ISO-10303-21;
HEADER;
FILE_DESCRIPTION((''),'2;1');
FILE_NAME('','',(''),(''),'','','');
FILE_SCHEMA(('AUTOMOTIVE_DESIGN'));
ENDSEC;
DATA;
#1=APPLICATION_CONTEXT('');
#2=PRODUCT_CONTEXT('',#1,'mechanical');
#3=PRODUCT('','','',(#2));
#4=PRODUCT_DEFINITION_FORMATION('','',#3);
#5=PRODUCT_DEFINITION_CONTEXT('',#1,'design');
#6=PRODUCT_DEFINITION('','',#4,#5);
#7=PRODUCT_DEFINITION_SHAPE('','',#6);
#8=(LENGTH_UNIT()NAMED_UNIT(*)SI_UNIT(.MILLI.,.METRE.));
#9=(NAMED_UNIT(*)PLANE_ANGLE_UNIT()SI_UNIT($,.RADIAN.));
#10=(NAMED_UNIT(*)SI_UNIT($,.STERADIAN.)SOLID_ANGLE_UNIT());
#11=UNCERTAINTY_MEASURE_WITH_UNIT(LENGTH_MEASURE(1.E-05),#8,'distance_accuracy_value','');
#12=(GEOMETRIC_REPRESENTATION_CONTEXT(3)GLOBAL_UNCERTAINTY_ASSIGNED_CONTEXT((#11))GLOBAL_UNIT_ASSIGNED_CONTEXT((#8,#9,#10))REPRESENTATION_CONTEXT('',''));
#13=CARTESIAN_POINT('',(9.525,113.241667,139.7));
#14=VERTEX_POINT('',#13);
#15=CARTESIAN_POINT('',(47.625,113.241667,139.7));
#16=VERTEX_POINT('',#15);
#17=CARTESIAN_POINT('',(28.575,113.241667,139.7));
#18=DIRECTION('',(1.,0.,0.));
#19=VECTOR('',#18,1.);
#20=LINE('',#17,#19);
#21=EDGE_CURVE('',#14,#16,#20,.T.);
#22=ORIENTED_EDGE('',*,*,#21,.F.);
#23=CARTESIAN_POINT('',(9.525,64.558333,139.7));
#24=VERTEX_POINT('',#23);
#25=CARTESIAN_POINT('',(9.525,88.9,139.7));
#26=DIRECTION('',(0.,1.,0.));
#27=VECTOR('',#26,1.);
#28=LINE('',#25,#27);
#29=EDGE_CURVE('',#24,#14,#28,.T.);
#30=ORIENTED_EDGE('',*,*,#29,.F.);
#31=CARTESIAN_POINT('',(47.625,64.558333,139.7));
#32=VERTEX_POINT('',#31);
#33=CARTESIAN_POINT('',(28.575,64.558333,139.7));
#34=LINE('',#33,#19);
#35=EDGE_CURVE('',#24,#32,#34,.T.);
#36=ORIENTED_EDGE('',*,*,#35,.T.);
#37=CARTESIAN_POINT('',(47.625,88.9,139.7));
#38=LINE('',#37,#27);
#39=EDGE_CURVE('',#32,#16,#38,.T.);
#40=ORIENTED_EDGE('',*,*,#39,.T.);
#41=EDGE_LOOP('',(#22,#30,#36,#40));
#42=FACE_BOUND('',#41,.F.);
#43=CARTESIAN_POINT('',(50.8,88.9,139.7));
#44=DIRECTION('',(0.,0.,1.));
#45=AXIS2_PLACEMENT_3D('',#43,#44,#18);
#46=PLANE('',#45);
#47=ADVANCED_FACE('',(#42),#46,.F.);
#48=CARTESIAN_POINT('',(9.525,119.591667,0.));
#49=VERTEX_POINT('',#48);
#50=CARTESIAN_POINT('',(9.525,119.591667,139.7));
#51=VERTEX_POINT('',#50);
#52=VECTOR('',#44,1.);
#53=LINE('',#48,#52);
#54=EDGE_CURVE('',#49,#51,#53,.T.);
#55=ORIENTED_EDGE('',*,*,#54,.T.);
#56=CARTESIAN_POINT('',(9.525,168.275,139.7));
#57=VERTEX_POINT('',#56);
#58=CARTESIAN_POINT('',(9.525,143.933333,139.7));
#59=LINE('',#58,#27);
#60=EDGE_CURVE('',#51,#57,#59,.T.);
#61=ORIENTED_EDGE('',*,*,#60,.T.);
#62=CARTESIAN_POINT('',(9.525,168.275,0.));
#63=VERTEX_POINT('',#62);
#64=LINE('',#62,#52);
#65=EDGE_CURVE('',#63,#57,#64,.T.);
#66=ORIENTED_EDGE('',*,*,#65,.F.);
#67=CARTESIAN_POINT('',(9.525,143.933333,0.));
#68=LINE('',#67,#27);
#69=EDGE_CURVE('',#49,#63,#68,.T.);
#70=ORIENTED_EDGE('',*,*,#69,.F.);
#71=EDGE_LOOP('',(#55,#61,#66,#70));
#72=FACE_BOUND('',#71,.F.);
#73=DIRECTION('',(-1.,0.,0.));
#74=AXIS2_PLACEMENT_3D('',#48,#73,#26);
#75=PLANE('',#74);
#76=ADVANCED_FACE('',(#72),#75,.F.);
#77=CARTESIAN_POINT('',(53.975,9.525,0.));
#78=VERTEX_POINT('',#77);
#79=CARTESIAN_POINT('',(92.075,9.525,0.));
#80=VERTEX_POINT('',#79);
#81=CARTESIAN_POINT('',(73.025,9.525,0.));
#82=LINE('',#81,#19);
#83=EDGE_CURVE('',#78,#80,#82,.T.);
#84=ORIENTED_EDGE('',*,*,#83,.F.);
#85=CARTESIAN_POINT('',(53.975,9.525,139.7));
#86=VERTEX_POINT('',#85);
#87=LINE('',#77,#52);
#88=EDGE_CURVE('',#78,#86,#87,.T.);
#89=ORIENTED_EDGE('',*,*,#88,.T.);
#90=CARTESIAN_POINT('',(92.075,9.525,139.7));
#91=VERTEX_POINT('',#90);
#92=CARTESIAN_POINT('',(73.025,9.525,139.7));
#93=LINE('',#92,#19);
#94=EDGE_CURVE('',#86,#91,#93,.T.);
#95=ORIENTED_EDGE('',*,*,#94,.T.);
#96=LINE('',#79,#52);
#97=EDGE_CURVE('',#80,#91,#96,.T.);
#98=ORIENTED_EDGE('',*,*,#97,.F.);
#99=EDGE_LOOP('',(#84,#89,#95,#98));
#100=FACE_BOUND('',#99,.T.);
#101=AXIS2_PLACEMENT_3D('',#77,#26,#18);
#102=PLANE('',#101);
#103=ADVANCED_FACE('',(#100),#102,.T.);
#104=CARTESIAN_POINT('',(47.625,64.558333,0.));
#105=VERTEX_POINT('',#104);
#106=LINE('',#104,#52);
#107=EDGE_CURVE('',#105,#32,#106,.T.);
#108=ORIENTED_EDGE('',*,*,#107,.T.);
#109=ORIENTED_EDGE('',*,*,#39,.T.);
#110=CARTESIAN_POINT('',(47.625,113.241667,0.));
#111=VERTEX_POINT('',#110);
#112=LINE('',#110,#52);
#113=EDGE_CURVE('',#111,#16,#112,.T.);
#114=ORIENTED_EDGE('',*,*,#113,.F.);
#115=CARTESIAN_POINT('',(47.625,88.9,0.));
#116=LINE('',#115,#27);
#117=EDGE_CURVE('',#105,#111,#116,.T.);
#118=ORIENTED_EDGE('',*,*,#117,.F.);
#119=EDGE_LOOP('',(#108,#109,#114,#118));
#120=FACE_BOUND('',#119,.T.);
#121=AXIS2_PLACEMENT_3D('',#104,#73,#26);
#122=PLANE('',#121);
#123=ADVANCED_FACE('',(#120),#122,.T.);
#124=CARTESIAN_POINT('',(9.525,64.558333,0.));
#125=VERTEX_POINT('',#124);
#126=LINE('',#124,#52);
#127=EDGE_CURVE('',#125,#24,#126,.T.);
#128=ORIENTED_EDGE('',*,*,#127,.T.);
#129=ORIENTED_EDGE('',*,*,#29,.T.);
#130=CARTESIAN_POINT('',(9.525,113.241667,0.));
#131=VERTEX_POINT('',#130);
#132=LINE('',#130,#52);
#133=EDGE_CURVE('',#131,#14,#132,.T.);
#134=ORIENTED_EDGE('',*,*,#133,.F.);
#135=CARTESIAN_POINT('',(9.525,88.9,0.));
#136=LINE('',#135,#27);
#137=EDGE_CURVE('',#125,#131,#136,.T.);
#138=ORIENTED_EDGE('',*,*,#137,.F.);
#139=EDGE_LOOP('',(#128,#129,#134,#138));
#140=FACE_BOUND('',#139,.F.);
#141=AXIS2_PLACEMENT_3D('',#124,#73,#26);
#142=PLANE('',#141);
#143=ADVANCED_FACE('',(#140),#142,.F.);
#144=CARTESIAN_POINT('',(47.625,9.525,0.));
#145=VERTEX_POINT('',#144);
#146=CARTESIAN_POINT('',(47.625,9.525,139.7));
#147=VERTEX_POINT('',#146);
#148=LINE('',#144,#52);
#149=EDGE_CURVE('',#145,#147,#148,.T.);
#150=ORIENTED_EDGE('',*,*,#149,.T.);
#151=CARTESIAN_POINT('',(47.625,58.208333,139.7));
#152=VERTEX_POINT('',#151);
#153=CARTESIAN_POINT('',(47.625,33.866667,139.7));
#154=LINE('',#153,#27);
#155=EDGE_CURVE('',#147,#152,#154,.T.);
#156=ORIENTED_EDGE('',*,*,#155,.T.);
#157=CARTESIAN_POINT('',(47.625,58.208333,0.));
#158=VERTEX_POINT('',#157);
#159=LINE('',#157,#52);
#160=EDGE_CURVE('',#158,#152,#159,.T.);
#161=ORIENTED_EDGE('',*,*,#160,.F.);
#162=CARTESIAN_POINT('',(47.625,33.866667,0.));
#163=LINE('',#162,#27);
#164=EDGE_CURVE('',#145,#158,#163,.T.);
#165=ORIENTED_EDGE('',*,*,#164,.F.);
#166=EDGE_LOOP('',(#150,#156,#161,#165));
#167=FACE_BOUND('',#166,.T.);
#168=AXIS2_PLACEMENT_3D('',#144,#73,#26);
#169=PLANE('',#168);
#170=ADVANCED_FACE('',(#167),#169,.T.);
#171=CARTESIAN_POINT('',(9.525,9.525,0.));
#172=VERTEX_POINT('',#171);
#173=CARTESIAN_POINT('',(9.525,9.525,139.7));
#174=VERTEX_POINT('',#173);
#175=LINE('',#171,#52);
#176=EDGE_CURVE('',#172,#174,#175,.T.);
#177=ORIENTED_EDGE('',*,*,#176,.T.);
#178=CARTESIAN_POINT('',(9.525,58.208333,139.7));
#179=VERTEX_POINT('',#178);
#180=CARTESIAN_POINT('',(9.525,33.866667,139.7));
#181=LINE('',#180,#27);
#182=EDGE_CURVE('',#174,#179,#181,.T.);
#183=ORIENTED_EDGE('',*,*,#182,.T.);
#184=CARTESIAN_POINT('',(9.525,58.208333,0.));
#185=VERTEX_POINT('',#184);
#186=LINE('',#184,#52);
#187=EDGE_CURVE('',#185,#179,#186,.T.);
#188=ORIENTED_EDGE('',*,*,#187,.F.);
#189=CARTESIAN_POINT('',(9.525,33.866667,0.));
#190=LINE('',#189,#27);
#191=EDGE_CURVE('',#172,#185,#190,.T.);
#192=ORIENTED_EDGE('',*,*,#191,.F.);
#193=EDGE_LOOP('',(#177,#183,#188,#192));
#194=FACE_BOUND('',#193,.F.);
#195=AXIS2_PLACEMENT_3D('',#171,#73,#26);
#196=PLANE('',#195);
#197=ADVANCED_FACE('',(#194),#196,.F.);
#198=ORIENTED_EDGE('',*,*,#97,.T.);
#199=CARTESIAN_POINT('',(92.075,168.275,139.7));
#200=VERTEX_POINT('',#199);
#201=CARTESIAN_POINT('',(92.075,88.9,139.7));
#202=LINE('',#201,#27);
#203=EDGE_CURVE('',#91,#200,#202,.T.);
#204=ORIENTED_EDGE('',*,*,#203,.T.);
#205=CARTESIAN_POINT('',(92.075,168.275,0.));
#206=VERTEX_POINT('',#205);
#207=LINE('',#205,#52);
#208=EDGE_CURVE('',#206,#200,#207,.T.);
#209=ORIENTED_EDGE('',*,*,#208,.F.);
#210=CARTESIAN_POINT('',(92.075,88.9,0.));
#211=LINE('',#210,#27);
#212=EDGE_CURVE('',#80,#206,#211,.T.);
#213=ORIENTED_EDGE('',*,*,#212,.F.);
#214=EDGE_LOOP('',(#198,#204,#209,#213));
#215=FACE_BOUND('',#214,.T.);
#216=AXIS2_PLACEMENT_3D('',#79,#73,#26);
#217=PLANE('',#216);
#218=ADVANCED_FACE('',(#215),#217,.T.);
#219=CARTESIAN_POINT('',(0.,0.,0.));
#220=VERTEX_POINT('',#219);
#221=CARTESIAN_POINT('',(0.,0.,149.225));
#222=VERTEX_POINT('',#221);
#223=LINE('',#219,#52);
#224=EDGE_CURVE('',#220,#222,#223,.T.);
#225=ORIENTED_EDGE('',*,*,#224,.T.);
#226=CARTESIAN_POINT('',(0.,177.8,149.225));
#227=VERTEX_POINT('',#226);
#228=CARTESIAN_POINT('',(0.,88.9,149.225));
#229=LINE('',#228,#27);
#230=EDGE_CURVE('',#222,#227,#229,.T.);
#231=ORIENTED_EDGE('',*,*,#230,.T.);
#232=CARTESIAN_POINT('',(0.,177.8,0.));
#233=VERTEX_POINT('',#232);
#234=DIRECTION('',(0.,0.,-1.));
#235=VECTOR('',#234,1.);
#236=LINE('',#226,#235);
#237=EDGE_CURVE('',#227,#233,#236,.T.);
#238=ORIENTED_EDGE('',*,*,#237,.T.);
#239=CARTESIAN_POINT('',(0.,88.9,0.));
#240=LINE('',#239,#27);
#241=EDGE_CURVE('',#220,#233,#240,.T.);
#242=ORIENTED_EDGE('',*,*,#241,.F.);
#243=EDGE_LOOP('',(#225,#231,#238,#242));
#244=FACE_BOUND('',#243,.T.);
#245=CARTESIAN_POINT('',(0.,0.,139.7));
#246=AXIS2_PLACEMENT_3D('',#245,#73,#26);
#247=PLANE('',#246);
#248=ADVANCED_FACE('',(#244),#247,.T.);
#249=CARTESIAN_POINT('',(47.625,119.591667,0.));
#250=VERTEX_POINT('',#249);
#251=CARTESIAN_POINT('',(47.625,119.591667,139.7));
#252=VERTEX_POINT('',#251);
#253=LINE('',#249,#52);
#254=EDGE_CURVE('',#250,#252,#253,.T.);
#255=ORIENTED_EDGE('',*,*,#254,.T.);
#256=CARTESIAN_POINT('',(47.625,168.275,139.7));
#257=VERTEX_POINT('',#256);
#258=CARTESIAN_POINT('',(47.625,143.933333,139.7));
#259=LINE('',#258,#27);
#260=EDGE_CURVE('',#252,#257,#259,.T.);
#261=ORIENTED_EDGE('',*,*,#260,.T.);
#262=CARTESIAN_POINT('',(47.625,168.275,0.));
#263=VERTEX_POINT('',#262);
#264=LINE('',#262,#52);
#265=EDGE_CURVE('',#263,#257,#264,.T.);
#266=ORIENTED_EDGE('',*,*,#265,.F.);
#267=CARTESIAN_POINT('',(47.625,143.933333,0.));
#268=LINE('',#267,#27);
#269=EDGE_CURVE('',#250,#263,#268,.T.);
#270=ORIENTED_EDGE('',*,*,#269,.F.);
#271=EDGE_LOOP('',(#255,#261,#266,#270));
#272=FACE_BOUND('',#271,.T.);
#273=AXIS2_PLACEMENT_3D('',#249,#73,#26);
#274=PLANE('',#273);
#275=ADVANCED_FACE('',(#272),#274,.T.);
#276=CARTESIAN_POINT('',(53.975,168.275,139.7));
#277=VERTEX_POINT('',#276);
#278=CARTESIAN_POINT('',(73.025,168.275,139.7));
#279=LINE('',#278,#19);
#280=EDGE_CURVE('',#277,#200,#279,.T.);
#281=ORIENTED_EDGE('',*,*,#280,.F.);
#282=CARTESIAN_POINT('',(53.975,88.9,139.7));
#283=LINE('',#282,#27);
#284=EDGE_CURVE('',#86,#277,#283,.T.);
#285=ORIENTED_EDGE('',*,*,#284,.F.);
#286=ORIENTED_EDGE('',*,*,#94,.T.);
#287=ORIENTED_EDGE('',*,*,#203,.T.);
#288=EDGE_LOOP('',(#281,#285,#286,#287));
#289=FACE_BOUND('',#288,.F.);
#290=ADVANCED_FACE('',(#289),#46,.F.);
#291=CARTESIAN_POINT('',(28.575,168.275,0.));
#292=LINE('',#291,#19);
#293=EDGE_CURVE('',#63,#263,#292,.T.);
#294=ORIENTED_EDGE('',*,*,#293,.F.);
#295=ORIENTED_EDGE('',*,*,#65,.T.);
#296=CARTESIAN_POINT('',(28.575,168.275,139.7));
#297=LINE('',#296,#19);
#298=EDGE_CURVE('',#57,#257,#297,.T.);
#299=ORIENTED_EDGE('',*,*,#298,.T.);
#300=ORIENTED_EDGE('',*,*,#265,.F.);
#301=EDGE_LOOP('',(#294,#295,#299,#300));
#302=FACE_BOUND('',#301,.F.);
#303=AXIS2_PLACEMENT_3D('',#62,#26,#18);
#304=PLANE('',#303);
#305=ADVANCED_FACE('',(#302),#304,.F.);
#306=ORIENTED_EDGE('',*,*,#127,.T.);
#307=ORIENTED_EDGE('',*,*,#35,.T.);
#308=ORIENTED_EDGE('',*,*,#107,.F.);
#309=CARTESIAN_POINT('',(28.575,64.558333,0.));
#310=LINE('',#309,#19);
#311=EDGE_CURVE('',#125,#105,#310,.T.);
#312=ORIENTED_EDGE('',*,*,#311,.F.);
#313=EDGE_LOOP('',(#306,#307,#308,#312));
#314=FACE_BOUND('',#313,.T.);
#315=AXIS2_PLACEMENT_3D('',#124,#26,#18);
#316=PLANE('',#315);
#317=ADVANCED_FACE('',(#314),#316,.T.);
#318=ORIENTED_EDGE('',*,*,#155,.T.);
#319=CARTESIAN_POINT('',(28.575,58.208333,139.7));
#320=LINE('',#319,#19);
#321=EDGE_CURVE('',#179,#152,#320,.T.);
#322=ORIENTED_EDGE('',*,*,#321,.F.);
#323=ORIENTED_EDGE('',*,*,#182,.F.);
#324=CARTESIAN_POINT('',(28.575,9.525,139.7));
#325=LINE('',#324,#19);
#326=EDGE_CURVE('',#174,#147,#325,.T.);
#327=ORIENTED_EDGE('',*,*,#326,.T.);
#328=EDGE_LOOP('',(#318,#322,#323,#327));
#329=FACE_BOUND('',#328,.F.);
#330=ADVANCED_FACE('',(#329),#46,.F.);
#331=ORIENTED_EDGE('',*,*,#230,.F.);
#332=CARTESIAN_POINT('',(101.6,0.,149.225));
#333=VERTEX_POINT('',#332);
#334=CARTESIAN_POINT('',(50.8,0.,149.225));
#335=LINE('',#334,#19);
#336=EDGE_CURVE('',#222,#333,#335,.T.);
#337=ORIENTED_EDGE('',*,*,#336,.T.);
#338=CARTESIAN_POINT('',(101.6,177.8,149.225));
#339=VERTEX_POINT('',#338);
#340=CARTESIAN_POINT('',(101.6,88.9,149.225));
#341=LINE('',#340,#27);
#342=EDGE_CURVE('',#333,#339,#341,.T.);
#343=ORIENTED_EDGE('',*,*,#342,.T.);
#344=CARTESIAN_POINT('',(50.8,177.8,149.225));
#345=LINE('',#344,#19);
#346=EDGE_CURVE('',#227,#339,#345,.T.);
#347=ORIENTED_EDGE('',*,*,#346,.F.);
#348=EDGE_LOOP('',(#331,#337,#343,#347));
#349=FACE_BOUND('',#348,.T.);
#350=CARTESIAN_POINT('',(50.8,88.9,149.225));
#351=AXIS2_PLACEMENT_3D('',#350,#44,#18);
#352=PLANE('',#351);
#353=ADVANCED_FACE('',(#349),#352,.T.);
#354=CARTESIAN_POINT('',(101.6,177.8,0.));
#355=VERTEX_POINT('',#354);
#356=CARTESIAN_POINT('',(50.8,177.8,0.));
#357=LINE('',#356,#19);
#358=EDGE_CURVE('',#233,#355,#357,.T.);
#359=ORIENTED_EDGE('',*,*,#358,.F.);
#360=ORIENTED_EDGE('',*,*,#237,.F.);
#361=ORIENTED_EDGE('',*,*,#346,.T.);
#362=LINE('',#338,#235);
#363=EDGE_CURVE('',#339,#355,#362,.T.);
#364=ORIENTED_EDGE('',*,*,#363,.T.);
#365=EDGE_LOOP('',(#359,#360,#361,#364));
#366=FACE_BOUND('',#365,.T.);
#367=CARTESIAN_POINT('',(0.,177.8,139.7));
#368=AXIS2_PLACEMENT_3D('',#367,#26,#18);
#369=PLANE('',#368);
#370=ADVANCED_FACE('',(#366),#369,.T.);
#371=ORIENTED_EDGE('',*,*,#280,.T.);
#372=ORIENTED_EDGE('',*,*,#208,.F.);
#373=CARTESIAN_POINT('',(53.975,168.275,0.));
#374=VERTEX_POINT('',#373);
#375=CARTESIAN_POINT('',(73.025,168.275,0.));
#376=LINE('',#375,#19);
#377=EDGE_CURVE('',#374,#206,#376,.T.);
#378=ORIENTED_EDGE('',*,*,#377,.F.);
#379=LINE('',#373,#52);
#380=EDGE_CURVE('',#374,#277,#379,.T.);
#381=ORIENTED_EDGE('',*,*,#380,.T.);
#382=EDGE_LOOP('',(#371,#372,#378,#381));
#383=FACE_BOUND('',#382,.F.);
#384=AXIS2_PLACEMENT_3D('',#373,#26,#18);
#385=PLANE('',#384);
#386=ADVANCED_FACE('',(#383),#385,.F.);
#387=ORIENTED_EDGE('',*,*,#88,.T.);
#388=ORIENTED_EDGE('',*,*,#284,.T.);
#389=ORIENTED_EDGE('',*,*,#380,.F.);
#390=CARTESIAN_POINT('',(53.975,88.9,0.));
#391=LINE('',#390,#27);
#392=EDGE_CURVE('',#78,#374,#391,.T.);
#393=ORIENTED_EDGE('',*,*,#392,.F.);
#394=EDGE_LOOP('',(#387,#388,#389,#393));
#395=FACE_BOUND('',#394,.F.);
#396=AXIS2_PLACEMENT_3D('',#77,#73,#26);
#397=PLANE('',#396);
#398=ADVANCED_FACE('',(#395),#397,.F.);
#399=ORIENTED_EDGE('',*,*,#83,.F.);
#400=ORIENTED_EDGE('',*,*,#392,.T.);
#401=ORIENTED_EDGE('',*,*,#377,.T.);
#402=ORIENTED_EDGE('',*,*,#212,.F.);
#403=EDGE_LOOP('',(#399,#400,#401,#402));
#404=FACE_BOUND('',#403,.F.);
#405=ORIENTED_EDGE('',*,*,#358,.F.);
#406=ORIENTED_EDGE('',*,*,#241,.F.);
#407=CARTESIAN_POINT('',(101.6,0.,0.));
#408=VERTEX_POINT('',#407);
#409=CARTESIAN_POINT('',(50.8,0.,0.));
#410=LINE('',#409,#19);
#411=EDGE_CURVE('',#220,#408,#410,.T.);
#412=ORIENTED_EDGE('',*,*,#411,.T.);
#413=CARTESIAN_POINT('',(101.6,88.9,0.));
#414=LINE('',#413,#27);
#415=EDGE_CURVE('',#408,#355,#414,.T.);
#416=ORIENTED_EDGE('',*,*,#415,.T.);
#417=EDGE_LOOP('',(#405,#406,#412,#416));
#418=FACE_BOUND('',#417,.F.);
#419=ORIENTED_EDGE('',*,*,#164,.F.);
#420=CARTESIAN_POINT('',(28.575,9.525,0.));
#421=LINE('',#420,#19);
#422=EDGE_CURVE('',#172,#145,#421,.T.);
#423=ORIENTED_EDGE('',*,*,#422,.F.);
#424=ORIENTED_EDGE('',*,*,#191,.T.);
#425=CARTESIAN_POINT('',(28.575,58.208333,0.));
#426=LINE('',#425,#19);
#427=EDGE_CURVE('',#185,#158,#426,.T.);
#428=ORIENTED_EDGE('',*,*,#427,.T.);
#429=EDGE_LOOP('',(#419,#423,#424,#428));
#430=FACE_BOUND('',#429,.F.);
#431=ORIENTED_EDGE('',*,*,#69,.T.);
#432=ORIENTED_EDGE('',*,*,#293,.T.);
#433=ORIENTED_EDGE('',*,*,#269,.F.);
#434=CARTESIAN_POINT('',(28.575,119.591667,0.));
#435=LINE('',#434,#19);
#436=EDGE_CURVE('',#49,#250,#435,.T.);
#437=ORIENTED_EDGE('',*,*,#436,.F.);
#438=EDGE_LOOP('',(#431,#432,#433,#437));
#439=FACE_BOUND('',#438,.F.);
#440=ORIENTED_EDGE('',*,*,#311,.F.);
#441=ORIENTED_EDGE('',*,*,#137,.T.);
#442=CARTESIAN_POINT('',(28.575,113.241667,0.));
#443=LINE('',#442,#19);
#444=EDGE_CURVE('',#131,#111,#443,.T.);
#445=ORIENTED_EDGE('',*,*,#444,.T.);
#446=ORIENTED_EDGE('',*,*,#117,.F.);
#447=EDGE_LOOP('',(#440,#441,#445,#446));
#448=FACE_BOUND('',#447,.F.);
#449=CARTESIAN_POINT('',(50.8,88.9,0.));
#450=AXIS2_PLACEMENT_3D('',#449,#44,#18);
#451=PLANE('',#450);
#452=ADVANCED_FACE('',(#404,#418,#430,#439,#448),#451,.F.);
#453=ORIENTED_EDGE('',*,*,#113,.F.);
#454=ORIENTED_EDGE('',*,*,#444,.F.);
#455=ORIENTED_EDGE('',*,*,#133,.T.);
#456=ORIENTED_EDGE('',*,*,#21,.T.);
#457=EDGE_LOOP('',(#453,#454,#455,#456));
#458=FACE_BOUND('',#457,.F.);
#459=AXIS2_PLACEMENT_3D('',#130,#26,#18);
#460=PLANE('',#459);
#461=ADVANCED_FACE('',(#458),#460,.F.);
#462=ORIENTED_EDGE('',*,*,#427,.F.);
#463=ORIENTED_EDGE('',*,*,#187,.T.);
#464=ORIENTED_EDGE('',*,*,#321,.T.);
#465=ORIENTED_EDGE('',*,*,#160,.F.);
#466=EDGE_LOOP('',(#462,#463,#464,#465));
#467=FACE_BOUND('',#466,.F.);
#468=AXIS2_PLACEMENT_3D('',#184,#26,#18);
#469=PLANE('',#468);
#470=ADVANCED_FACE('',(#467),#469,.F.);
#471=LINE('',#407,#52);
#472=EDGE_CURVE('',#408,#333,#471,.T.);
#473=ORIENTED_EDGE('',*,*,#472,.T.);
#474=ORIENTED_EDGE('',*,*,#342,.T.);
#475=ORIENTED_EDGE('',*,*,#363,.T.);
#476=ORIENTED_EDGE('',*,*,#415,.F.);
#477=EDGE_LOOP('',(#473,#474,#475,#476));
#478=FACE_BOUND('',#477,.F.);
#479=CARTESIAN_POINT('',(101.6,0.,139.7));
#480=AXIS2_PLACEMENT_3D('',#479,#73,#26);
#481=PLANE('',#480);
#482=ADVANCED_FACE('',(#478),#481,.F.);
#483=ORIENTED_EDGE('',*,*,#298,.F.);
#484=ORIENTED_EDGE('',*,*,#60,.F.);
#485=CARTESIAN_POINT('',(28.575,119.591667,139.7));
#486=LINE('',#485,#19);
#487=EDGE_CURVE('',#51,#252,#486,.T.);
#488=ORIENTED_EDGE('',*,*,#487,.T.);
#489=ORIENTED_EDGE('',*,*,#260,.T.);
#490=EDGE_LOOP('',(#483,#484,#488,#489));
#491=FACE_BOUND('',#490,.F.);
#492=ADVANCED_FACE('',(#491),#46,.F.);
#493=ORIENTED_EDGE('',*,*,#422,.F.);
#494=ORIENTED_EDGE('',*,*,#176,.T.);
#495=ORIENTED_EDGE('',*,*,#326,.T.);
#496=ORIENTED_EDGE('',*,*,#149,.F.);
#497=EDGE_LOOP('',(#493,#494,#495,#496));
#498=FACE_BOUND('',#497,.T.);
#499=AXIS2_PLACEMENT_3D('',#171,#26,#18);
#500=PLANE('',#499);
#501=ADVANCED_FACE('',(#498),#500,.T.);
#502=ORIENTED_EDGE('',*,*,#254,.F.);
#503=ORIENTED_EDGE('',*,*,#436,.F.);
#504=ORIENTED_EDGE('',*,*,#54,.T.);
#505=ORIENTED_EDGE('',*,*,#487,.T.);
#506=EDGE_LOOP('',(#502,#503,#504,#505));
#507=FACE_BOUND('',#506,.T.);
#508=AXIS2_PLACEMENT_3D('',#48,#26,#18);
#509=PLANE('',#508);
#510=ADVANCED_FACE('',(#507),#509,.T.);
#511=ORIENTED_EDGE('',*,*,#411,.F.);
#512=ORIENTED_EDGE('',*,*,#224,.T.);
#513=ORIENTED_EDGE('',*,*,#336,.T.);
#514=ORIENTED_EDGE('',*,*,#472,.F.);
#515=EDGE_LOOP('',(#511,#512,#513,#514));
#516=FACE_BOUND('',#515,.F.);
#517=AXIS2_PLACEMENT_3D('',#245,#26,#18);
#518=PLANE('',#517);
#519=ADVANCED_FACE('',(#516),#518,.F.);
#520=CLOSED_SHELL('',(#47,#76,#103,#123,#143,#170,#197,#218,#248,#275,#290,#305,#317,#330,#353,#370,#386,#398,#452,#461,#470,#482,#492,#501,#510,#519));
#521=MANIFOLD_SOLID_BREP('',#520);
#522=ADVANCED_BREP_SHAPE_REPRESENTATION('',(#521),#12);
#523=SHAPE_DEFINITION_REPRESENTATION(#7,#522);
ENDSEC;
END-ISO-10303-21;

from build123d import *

# Parameters (mm, degrees)
F1_W     = 101.6
F1_H     = 177.8
F1_W_2   = 38.1
F1_H_2   = 48.6833333333
F1_H_3   = 158.75
F2_DEPTH = 139.7
F3_W     = 101.6
F3_H     = 177.8
F4_DEPTH = 9.525


# Not quite as in the source:
# - a variable given as a bare number and used for a length is read in inches; the dataset says mm whatever the document's units were


with BuildPart() as f2:
    # F1 (on Top) → F2 (new body)
    with BuildSketch(Plane.XY):
        with Locations((50.8, 88.9)):
            Rectangle(F1_W, F1_H)
        with Locations((28.575, 33.8666666667)):
            Rectangle(F1_W_2, F1_H_2, mode=Mode.SUBTRACT)
        with Locations((28.575, 88.9)):
            Rectangle(F1_W_2, F1_H_2, mode=Mode.SUBTRACT)
        with Locations((28.575, 143.9333333333)):
            Rectangle(F1_W_2, F1_H_2, mode=Mode.SUBTRACT)
        with Locations((73.025, 88.9)):
            Rectangle(F1_W_2, F1_H_3, mode=Mode.SUBTRACT)
    extrude(amount=F2_DEPTH)

    # F3 (on face) → F4 (join)
    with BuildSketch(Plane.XY.offset(139.7)):
        with Locations((50.8, 88.9)):
            Rectangle(F3_W, F3_H)
    extrude(amount=F4_DEPTH)


solid = f2.part
